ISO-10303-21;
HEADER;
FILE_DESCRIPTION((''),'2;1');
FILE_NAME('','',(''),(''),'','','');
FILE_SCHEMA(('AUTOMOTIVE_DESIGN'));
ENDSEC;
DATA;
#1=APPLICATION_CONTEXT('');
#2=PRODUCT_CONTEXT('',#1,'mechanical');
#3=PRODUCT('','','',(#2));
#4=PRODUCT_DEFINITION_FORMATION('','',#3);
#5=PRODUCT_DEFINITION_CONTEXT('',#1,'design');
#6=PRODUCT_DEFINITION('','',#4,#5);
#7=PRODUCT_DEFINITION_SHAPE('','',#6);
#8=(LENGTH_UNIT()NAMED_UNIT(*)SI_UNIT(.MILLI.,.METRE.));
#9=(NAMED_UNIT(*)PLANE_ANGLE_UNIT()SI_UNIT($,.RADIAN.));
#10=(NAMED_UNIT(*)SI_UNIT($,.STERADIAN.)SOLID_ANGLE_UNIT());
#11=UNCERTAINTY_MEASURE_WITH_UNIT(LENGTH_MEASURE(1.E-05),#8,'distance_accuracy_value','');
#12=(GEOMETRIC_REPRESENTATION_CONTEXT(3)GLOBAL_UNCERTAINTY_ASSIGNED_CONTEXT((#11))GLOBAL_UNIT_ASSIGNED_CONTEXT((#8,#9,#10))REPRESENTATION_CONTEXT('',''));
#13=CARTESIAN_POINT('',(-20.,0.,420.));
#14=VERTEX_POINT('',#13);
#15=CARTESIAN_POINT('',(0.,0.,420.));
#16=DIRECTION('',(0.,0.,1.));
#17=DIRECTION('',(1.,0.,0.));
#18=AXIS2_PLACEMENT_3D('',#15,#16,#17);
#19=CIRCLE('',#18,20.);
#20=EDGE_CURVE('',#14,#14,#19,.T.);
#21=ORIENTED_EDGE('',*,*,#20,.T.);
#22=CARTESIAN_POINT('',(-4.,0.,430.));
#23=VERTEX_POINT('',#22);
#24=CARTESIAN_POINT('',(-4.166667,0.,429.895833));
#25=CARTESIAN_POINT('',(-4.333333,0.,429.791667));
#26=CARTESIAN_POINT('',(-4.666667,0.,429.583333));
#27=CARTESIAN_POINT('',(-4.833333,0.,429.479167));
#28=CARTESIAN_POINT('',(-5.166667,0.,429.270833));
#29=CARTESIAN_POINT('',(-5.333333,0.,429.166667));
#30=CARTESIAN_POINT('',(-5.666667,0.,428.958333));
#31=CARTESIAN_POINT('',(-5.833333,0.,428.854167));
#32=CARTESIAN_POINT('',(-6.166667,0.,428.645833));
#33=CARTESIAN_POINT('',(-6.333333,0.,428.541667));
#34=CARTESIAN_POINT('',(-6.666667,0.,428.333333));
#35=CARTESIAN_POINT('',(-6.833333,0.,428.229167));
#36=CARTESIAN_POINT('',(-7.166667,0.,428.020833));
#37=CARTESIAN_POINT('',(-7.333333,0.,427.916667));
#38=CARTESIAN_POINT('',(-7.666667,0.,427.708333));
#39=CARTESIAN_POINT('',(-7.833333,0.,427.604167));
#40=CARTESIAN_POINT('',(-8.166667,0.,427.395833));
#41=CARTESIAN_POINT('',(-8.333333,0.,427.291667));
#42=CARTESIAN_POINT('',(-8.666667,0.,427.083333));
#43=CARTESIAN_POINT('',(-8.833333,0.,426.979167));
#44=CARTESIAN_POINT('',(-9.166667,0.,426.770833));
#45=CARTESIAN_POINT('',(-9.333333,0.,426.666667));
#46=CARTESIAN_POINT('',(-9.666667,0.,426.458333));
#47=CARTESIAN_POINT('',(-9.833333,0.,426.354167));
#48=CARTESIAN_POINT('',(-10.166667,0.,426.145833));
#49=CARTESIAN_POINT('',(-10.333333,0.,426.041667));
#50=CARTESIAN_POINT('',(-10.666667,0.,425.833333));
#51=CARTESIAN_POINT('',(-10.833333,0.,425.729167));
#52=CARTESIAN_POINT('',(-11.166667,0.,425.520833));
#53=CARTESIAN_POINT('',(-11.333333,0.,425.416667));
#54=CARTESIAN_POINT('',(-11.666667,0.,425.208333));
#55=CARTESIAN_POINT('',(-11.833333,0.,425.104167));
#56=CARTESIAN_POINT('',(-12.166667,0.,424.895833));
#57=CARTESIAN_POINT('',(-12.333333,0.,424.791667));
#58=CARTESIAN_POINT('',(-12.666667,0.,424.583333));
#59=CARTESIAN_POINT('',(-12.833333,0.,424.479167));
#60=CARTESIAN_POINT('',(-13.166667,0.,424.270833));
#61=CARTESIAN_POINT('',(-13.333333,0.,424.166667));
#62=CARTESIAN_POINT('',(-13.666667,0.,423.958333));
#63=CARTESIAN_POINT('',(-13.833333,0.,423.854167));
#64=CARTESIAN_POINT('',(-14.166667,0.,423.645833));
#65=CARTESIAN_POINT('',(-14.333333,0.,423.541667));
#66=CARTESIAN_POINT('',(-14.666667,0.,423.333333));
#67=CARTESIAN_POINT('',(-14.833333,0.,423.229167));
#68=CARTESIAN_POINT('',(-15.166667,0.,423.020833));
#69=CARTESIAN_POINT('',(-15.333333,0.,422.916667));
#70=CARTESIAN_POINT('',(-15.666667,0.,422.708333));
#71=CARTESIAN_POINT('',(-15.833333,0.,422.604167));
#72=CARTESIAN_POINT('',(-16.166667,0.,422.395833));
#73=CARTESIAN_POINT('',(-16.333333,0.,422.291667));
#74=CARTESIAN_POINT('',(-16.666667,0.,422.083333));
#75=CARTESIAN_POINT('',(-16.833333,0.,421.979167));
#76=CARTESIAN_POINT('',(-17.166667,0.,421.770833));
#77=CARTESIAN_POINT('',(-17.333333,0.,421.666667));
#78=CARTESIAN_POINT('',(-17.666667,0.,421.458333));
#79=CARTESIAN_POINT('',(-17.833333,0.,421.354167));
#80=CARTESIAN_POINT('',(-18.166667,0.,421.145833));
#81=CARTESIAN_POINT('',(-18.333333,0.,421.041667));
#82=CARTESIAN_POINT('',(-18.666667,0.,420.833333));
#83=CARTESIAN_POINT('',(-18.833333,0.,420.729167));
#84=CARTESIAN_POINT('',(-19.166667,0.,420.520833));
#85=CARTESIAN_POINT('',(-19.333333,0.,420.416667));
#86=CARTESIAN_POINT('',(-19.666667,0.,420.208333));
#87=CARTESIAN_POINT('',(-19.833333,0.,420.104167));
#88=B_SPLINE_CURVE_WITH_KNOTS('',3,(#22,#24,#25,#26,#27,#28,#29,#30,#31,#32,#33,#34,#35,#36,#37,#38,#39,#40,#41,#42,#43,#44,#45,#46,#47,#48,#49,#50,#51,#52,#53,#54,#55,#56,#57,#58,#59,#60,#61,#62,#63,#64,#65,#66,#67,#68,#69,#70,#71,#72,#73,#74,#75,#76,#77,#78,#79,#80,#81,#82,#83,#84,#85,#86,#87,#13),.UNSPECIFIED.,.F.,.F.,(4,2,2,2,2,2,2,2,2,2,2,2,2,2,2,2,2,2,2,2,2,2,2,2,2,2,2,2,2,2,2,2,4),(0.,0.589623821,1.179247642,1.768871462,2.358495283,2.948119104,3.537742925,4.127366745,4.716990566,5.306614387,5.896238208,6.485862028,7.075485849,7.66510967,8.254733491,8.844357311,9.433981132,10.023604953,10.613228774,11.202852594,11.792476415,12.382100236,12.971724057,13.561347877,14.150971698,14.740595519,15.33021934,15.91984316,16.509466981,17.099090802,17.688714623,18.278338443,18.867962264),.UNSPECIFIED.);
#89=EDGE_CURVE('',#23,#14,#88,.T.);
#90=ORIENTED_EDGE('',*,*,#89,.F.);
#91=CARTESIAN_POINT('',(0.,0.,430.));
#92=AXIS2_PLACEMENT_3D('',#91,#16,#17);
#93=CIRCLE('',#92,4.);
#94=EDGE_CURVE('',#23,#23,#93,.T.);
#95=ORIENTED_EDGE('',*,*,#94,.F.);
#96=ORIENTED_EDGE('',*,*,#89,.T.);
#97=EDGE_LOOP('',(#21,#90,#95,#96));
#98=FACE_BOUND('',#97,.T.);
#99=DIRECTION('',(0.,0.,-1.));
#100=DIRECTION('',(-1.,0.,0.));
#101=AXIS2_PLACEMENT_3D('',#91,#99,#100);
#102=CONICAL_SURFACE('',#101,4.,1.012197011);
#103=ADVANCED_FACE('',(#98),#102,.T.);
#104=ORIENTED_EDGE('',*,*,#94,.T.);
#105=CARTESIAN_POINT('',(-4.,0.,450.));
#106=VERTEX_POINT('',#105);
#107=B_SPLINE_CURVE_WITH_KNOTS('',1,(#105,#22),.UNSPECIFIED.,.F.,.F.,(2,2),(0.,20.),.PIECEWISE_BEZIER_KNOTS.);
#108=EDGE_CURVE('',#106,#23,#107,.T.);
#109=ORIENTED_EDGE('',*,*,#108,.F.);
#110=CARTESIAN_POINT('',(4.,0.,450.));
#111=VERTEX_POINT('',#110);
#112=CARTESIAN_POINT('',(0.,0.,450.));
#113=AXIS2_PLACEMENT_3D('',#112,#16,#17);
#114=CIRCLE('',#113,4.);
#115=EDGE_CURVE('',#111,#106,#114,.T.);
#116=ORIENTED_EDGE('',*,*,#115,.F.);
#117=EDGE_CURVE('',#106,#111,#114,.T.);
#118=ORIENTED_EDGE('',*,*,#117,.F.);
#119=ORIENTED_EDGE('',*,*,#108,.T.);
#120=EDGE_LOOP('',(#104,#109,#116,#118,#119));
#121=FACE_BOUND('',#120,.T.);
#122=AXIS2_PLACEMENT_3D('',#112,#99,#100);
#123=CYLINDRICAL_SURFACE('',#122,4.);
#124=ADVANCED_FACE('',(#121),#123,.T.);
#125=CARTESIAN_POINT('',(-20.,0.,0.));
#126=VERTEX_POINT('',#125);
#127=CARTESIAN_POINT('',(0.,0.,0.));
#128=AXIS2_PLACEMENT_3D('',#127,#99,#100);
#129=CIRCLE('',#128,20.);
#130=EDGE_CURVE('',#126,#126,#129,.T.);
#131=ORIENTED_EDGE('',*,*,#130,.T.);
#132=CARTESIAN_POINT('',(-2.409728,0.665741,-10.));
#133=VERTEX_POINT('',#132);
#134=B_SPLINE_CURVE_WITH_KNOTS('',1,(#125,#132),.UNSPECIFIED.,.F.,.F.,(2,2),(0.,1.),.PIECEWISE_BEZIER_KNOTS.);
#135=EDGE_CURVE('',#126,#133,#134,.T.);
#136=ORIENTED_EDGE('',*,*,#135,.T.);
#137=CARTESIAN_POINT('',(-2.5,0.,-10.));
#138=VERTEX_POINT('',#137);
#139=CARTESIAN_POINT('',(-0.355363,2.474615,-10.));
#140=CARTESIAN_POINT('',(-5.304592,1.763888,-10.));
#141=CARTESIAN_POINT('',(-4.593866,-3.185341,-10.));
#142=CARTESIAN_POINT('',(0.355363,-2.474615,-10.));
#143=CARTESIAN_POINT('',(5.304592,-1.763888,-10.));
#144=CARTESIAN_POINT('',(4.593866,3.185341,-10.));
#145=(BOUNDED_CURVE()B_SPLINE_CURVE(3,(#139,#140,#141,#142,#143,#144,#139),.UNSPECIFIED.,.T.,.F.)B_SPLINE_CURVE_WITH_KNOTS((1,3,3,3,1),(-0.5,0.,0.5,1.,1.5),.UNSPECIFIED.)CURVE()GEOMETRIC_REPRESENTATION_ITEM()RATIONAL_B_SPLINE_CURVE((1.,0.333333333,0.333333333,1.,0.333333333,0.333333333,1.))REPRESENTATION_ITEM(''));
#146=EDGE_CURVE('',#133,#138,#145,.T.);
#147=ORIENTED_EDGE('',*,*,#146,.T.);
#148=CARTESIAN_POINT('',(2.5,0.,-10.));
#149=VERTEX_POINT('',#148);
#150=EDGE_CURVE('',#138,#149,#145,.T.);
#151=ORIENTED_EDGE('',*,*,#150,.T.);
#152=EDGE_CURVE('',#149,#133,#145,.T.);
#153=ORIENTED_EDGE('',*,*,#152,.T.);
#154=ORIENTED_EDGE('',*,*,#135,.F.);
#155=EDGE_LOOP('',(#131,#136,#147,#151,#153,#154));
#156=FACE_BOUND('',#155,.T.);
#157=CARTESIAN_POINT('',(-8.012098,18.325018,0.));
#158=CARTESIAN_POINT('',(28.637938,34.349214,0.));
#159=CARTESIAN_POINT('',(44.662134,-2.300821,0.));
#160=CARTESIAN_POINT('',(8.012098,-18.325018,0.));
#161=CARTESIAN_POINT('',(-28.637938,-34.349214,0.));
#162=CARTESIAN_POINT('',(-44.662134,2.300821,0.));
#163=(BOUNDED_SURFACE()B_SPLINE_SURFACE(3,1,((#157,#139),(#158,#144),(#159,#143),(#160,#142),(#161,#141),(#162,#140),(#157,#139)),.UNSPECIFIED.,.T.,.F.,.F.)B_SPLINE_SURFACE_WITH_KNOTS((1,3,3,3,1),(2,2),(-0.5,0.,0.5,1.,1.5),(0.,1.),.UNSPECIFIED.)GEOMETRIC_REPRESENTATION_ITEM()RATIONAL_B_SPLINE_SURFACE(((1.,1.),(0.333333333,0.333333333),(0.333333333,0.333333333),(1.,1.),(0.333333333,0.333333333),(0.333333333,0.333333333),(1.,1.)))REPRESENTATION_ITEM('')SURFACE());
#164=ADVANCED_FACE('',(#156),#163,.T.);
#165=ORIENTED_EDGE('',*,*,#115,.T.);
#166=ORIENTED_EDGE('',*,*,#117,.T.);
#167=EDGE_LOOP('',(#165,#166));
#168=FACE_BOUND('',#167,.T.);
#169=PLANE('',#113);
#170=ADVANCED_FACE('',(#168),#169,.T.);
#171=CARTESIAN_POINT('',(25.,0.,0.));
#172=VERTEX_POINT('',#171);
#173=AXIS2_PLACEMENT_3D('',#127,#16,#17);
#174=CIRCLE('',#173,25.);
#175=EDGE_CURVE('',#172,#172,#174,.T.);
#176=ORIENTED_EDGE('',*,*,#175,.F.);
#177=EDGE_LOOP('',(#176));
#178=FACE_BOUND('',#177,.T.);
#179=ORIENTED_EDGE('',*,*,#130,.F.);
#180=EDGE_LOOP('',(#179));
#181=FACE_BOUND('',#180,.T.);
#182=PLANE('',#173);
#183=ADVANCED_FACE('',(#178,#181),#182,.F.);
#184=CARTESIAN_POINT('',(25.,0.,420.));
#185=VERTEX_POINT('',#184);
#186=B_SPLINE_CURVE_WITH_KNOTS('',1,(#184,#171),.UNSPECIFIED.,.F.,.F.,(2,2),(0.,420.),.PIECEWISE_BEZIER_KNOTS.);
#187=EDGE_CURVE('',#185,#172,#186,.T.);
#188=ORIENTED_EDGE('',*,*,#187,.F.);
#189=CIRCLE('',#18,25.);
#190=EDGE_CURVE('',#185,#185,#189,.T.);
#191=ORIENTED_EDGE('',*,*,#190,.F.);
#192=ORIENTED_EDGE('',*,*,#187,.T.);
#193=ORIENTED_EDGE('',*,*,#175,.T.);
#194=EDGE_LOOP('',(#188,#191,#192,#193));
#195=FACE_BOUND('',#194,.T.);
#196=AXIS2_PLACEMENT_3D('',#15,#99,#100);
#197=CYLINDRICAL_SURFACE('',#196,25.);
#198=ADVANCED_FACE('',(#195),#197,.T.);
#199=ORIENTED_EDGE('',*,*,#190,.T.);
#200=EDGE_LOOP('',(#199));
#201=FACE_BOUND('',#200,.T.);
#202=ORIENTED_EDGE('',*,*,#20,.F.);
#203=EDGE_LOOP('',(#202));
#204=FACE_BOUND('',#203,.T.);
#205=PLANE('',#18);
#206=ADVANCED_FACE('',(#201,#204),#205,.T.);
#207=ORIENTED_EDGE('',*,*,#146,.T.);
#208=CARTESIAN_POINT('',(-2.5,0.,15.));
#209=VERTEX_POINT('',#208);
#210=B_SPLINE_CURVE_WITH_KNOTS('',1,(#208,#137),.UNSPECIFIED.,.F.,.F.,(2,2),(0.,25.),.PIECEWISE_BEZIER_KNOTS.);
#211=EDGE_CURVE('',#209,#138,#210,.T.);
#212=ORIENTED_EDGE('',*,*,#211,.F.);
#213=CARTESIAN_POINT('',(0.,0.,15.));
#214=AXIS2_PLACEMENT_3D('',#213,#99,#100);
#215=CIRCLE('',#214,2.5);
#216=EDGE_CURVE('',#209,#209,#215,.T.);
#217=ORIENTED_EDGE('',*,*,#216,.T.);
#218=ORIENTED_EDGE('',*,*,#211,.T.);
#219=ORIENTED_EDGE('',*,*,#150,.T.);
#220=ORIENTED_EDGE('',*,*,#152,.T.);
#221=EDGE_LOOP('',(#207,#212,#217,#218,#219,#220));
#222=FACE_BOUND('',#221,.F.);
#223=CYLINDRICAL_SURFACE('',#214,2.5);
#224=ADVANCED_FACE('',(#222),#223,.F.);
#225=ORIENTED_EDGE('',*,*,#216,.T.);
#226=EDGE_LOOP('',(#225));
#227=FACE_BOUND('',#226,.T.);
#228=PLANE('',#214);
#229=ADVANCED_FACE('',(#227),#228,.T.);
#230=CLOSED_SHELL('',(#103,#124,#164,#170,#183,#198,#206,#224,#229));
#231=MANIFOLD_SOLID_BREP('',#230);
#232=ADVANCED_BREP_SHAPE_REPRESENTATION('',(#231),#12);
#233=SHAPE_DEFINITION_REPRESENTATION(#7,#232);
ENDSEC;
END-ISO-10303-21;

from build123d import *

# Parameters (mm, degrees)
SCHIZZO1_R                   = 25
ESTRUSIONE_ESTRUSIONE1_DEPTH = 420
SCHIZZO5_R                   = 4
SCHIZZO4_R                   = 20
SCHIZZO9_R                   = 4
ESTRUSIONE_ESTRUSIONE2_DEPTH = 20
SCHIZZO12_R                  = 2.5
TAGLIO_ESTRUSIONE2_DEPTH     = 25


with BuildPart() as part:
    # Schizzo1 → Estrusione-Estrusione1 (new body)
    with BuildSketch(Plane.XY):
        Circle(SCHIZZO1_R)
    extrude(amount=ESTRUSIONE_ESTRUSIONE1_DEPTH)

    # Schizzo5 → Loft2 section 0
    with BuildSketch(Plane.XY.offset(430)):
        Circle(SCHIZZO5_R)
    # Schizzo4 → Loft2 section 1
    with BuildSketch(Plane.XY.offset(420)):
        Circle(SCHIZZO4_R)
    loft()

    # Schizzo9 → Estrusione-Estrusione2 (add)
    with BuildSketch(Plane.XY.offset(430)):
        with Locations(Location((0, 0, 0), (0, 0, 180))):
            Circle(SCHIZZO9_R)
    extrude(amount=ESTRUSIONE_ESTRUSIONE2_DEPTH)

    # Loft3: read off the stored shape, not the designer's step
    # Loft3: loft between two sections, ruled curve by curve
    loft3_from = [
        Edge.make_bspline([(-8.012098274, 18.325017906, 0), (28.637937538, 34.349214454, 0), (44.662134086, -2.300821358, 0), (8.012098274, -18.325017906, 0), (-28.637937538, -34.349214454, 0), (-44.662134086, 2.300821358, 0), (-8.012098274, 18.325017906, 0)], [0, 0, 0, 0, 0.5, 0.5, 0.5, 1, 1, 1, 1], 3, [1, 0.333333333, 0.333333333, 1, 0.333333333, 0.333333333, 1]),
    ]
    loft3_to = [
        Edge.make_bspline([(-0.355363052, 2.474614536, -10), (4.59386602, 3.18534064, -10), (5.304592124, -1.763888432, -10), (0.355363052, -2.474614536, -10), (-4.59386602, -3.18534064, -10), (-5.304592124, 1.763888432, -10), (-0.355363052, 2.474614536, -10)], [0, 0, 0, 0, 0.5, 0.5, 0.5, 1, 1, 1, 1], 3, [1, 0.333333333, 0.333333333, 1, 0.333333333, 0.333333333, 1]),
    ]
    loft3 = Solid(Shell([*[Face.make_surface_from_curves(loft3_from[k], loft3_to[k]) for k in range(1)], Face(Wire(loft3_from)), Face(Wire(loft3_to))]))
    add(loft3)

    # Schizzo12 → Taglio-Estrusione2 (cut)
    with BuildSketch(Plane(origin=(0, 0, -10), x_dir=(-1, 0, 0), z_dir=(0, 0, -1))):
        Circle(SCHIZZO12_R)
    extrude(amount=-TAGLIO_ESTRUSIONE2_DEPTH, mode=Mode.SUBTRACT)


solid = part.part
